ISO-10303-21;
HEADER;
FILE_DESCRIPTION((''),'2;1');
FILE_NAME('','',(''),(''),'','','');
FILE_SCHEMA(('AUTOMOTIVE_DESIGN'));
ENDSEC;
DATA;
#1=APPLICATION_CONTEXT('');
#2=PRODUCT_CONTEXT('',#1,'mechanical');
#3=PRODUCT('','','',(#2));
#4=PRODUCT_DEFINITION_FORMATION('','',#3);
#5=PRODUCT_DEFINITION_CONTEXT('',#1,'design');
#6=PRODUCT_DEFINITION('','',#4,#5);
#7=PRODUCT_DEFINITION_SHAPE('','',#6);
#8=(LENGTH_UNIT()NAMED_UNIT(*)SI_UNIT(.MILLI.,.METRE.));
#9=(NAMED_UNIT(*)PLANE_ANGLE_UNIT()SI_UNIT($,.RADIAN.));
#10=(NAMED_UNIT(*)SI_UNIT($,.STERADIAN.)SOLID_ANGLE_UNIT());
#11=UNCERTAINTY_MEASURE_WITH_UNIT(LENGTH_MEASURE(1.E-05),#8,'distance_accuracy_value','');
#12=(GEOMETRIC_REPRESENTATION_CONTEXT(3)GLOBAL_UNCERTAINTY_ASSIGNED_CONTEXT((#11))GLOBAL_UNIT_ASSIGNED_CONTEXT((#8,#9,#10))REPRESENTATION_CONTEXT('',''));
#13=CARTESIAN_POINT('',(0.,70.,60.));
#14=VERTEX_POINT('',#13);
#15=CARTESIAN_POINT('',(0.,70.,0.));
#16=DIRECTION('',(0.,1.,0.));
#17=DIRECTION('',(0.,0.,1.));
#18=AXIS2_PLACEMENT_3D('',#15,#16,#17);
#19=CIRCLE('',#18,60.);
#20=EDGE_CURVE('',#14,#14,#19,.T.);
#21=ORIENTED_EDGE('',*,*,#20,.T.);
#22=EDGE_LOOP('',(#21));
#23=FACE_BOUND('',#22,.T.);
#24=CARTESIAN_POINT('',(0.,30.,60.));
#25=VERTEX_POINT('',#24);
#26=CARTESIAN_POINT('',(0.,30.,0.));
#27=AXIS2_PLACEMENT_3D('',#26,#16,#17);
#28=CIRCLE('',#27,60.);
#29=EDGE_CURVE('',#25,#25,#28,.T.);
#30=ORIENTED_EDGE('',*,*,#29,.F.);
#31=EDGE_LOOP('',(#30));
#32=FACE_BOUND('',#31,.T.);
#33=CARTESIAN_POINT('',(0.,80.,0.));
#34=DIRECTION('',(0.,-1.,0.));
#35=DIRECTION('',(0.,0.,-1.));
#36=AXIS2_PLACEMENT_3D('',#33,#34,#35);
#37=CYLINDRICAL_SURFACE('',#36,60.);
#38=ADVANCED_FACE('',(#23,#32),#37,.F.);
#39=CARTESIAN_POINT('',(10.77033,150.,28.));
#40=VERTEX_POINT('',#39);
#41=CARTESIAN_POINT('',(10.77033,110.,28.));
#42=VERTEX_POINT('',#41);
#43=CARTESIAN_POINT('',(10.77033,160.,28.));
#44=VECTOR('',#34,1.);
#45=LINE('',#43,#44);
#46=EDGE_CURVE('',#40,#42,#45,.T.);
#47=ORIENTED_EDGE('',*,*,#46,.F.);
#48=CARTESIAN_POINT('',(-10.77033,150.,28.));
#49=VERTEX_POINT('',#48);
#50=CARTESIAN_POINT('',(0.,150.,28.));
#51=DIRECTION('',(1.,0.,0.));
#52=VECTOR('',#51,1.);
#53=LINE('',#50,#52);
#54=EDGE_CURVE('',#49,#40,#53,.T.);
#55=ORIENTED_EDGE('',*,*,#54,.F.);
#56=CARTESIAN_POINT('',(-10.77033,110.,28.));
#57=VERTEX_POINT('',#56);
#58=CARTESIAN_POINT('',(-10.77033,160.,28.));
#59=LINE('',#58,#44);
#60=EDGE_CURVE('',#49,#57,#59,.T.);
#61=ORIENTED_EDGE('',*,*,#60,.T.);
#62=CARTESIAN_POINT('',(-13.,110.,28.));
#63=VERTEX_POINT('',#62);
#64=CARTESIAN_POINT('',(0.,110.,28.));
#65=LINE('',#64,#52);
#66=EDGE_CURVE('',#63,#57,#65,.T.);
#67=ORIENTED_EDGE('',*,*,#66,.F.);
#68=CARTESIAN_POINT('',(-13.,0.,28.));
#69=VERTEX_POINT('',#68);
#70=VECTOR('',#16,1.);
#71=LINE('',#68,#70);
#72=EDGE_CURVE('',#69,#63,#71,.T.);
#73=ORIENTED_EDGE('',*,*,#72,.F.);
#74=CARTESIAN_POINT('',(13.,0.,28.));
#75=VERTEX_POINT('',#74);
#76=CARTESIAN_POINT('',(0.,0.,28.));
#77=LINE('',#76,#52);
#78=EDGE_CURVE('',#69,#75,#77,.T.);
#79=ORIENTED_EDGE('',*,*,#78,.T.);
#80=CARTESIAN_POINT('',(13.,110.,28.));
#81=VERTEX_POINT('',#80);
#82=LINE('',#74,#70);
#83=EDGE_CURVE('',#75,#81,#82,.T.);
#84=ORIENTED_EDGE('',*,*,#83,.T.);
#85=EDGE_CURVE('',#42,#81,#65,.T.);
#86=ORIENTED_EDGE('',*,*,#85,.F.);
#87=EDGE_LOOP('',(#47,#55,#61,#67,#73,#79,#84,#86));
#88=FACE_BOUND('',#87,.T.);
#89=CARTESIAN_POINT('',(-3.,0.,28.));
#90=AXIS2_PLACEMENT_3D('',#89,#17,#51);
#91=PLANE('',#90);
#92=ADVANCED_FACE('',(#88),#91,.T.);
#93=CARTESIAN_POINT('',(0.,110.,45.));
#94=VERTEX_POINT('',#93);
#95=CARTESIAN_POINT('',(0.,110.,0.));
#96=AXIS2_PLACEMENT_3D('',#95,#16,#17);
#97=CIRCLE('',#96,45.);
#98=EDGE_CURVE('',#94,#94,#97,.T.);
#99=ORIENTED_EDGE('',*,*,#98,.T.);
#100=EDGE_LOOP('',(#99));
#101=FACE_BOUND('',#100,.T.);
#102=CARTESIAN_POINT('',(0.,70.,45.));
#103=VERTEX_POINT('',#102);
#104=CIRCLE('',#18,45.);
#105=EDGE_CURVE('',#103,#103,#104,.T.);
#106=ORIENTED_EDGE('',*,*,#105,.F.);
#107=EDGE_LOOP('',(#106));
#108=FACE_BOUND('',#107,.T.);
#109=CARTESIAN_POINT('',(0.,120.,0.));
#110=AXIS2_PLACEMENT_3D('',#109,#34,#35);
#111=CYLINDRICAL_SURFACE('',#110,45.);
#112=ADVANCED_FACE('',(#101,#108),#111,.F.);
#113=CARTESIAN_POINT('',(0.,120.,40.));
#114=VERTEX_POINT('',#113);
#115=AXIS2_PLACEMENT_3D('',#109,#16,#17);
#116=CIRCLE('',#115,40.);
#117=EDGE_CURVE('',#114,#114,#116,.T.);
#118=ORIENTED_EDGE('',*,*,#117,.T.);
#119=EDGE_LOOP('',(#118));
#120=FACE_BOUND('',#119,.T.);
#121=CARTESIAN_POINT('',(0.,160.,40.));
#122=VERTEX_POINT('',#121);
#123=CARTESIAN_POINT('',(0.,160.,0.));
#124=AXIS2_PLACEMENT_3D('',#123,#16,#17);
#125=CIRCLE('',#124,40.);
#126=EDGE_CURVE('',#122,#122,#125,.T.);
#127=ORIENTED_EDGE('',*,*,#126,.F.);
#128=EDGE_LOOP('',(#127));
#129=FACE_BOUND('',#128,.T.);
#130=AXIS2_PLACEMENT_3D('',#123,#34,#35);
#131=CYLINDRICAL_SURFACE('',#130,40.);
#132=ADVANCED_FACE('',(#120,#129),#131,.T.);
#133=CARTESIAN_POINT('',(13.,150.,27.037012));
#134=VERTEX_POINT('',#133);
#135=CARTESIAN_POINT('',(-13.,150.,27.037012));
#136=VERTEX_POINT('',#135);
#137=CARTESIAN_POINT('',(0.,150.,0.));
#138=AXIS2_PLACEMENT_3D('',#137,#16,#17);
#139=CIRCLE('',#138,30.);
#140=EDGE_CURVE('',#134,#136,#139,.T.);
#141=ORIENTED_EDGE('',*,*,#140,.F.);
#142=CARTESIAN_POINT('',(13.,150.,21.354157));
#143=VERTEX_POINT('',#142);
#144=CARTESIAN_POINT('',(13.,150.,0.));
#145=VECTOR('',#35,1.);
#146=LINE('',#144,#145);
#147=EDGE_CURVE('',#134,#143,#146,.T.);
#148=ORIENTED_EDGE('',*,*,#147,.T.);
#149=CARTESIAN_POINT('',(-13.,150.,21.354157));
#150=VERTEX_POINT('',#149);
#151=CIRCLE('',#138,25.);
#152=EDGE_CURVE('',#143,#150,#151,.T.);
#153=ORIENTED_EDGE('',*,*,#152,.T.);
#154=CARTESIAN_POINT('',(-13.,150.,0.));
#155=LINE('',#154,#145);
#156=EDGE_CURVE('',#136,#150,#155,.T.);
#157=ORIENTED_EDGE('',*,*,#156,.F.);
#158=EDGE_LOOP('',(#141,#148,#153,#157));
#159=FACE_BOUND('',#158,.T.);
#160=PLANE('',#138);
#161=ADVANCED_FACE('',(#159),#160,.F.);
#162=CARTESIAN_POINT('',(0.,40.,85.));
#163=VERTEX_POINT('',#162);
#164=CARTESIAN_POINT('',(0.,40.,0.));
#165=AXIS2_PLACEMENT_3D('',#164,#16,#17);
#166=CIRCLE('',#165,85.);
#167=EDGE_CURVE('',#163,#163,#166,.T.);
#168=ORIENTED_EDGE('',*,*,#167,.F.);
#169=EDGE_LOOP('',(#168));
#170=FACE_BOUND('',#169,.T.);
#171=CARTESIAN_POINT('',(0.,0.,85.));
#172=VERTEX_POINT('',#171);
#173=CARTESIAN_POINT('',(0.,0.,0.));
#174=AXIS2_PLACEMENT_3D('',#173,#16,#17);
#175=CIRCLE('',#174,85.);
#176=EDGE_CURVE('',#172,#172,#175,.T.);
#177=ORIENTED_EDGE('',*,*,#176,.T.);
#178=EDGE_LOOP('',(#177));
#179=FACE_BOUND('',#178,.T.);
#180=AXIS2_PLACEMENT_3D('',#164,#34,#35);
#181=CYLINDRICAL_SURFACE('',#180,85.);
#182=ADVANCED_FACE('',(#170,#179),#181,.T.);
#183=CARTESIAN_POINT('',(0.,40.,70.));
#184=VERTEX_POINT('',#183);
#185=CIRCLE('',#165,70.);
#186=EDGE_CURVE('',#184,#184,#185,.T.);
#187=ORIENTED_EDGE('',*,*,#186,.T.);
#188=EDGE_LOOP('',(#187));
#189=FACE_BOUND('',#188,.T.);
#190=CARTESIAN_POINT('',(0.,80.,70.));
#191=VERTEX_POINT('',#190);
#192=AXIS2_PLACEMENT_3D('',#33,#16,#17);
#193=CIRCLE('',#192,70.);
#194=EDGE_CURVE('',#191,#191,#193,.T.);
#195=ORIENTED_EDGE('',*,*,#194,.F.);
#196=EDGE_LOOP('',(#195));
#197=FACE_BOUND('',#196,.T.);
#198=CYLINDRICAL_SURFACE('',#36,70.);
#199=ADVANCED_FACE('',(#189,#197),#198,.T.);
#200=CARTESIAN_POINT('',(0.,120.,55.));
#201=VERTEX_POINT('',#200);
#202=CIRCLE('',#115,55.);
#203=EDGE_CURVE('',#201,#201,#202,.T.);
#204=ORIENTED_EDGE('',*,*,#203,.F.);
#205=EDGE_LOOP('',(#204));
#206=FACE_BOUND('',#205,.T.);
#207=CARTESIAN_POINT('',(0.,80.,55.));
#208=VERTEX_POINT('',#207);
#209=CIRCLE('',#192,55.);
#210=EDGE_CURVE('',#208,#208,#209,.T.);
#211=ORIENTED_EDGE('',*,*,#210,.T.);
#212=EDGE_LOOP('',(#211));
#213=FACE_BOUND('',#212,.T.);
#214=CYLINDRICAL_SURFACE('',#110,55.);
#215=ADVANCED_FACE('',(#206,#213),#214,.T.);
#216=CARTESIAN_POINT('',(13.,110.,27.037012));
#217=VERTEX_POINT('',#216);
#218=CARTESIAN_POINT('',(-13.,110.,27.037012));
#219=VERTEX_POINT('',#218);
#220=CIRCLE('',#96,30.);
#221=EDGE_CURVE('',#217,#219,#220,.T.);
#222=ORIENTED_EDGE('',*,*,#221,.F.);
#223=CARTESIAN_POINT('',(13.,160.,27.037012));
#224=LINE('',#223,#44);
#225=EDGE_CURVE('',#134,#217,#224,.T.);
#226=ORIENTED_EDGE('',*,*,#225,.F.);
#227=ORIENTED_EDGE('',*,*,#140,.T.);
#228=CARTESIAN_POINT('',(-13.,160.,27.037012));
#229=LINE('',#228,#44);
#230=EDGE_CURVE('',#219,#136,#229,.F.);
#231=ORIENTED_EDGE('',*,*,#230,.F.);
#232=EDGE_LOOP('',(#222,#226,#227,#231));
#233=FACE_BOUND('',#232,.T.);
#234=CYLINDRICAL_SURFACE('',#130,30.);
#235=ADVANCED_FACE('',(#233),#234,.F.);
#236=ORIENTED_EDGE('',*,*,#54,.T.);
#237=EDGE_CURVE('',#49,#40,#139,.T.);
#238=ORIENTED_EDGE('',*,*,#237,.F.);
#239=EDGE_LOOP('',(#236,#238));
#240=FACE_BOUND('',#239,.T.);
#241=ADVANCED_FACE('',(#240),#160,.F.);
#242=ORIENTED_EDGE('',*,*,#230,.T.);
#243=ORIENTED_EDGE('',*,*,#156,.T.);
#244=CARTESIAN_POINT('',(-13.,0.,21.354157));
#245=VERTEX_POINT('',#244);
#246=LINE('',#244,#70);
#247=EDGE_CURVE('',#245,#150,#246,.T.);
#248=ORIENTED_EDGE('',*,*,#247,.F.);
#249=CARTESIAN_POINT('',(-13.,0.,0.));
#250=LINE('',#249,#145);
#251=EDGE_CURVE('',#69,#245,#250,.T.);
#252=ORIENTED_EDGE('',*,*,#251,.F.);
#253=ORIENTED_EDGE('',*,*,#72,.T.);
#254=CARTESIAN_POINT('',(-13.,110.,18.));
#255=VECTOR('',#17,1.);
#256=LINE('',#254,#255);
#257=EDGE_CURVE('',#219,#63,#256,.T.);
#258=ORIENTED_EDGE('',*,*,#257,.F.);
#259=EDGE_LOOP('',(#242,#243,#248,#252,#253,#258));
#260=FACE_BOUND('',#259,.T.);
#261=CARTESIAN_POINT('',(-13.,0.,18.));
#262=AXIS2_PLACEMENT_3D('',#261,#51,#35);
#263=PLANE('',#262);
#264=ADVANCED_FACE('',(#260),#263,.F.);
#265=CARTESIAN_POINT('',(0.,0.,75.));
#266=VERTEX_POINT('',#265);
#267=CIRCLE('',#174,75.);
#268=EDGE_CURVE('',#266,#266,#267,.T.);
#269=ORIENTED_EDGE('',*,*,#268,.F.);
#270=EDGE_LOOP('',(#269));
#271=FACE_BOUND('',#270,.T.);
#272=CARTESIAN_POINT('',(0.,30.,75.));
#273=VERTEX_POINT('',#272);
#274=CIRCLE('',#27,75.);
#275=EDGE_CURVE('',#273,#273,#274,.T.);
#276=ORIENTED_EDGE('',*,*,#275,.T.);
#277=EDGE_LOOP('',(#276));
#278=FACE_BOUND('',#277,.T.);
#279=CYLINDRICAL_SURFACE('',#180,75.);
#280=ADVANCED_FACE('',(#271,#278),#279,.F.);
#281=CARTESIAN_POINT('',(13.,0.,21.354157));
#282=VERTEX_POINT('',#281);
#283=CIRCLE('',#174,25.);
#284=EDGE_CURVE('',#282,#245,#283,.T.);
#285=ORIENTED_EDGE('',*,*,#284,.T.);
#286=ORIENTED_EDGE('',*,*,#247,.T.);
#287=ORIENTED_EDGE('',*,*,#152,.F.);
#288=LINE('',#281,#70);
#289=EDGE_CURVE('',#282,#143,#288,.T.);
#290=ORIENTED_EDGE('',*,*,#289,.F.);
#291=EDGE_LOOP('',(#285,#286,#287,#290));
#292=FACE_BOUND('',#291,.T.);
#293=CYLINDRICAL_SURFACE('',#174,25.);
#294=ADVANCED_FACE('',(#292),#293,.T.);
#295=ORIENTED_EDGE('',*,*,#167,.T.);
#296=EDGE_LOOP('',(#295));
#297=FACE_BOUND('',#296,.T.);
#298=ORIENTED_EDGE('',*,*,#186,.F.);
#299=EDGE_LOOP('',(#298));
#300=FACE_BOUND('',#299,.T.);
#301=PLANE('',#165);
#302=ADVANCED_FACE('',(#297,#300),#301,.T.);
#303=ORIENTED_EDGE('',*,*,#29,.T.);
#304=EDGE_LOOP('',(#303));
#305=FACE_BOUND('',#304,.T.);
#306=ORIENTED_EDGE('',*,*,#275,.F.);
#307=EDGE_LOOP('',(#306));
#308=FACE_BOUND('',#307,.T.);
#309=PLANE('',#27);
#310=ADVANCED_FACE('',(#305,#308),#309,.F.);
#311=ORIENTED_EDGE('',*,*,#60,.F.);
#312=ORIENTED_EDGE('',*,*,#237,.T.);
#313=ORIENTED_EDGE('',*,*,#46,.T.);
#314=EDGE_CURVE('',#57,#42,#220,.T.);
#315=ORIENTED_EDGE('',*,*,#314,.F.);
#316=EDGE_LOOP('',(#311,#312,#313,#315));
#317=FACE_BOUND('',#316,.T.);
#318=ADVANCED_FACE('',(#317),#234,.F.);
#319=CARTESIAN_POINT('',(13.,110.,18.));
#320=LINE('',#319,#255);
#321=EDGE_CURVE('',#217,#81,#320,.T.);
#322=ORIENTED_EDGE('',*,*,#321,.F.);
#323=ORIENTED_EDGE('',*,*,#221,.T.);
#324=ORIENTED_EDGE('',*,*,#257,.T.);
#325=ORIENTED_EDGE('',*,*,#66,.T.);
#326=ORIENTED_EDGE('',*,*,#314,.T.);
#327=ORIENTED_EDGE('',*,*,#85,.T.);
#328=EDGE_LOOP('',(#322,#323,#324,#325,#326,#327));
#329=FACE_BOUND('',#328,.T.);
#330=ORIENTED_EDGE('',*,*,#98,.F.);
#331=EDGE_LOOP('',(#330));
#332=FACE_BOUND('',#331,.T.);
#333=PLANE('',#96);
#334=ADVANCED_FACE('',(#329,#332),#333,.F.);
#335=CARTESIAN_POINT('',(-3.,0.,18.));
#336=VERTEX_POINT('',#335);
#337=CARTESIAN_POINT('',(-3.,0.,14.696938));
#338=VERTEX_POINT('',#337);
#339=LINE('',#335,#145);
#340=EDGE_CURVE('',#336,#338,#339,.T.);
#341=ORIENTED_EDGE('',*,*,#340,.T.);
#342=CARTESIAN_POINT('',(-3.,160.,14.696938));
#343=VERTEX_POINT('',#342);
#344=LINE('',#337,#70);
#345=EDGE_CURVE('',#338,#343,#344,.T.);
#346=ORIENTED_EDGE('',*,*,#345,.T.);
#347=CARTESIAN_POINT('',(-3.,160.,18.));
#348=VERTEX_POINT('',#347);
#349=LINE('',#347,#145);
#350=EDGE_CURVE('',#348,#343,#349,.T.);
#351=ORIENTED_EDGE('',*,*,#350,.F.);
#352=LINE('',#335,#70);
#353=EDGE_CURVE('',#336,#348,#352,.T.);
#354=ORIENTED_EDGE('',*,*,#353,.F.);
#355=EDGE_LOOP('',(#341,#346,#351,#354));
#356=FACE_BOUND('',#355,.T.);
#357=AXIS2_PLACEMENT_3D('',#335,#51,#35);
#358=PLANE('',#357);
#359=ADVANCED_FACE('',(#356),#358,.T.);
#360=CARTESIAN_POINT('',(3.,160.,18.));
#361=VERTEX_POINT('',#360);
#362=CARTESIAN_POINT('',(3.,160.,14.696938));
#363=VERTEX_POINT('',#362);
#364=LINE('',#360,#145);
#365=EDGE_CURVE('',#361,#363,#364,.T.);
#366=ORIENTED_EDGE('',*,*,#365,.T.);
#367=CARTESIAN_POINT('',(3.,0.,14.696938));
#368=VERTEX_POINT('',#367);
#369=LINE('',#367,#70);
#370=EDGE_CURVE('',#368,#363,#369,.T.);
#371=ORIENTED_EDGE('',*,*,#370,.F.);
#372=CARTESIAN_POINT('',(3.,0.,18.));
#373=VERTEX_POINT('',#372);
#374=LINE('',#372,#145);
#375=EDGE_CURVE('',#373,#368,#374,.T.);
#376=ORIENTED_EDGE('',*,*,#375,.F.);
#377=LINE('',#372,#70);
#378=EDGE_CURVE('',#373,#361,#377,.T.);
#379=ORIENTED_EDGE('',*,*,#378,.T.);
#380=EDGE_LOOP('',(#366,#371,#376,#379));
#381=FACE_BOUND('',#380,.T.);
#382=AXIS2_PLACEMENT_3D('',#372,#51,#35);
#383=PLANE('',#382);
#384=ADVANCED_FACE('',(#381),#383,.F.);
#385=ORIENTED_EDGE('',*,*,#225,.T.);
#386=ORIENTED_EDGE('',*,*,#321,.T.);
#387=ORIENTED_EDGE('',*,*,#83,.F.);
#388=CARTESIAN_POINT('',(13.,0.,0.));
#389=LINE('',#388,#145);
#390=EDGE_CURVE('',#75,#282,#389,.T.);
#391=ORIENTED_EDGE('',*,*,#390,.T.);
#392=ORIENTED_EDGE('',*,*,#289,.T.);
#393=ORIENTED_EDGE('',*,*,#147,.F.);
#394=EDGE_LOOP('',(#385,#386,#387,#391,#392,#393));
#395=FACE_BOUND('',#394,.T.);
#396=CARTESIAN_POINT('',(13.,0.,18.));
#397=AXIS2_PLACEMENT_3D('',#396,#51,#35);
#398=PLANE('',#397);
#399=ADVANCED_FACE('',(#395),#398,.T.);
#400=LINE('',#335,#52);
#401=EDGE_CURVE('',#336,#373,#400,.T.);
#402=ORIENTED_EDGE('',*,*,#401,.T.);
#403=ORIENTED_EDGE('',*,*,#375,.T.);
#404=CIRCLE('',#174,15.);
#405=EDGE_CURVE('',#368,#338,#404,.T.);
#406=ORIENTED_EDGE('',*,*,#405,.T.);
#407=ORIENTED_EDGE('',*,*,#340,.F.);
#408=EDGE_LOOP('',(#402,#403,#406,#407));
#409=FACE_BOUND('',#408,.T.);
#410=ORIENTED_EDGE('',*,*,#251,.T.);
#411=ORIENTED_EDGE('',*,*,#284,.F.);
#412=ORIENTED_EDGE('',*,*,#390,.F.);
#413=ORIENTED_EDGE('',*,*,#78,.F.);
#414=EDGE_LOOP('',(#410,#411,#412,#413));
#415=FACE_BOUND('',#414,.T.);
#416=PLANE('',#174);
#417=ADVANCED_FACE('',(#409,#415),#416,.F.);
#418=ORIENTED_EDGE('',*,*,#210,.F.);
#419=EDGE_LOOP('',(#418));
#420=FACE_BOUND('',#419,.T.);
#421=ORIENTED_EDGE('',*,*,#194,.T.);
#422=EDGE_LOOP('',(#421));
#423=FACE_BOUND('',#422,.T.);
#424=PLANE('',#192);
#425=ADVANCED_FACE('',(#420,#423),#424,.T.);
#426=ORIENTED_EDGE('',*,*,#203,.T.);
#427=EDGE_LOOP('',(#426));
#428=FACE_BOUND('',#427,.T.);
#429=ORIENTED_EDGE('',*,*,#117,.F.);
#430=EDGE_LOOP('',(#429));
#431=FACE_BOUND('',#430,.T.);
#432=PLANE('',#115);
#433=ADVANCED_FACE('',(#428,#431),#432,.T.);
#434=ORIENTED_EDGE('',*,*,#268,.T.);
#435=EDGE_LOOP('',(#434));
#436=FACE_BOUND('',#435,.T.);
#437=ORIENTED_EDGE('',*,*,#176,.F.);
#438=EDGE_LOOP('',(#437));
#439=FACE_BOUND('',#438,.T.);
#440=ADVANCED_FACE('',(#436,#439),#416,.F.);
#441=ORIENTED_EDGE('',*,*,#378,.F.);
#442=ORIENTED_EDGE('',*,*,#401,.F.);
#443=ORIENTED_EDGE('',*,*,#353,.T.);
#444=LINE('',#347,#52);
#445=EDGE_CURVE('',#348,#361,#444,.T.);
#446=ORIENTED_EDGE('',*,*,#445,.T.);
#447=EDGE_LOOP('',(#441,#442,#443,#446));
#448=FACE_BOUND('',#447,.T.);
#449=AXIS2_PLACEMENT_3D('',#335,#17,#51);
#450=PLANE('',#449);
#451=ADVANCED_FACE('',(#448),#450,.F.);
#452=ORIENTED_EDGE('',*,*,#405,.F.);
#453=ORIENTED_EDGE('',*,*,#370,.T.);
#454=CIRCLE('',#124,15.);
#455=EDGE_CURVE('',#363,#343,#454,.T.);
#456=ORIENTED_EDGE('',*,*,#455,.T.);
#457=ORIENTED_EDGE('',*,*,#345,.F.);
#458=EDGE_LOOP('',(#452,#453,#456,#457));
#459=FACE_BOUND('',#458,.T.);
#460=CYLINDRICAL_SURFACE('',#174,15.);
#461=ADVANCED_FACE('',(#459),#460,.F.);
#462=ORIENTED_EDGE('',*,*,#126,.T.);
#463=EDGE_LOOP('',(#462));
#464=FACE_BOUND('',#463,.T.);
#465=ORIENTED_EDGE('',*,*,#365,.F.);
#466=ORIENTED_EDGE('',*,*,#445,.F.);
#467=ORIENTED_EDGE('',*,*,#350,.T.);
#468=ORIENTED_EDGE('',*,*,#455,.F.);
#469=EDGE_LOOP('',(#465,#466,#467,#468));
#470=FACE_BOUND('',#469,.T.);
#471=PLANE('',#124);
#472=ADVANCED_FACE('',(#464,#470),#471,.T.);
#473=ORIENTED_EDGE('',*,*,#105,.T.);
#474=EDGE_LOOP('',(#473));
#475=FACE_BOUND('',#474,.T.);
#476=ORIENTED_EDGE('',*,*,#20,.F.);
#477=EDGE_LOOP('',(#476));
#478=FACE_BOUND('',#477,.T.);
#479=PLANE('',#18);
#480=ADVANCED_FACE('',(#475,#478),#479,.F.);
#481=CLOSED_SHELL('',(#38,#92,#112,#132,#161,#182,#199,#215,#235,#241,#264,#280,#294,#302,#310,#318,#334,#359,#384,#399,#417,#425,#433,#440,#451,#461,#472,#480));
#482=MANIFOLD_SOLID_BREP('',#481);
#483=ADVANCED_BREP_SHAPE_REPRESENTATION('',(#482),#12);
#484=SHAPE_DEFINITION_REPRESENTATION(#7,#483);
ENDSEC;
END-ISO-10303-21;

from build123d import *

# Parameters (mm, degrees)
SKETCH1_R            = 85
BOSS_EXTRUDE1_DEPTH  = 40
SKETCH2_R            = 70
BOSS_EXTRUDE2_DEPTH  = 40
SKETCH3_R            = 55
BOSS_EXTRUDE3_DEPTH  = 40
SKETCH4_R            = 40
BOSS_EXTRUDE4_DEPTH  = 40
SKETCH5_R            = 15
SKETCH5_W            = 6
SKETCH5_H            = 6
CUT_EXTRUDE1_DEPTH   = 201.124960962
SHELL1_OUTLINE_R     = 60
SHELL1_DEPTH         = 70
SHELL1_2_OUTLINE_R   = 75
SHELL1_2_OUTLINE_R_2 = 60
SHELL1_2_DEPTH       = 30
SHELL1_START         = 70
SHELL1_3_OUTLINE_R   = 45
SHELL1_3_DEPTH       = 40
SHELL1_START_2       = 110
SHELL1_4_DEPTH       = 40


# Read off the part's stored shape, not the designer's step: Shell1
with BuildPart() as part:
    # Sketch1 → Boss-Extrude1 (new body)
    with BuildSketch(Plane(origin=(0, 0, 0), x_dir=(1, 0, 0), z_dir=(0, 1, 0))):
        with Locations(Location((0, 0, 0), (0, 0, 270))):
            Circle(SKETCH1_R)
    extrude(amount=BOSS_EXTRUDE1_DEPTH)

    # Sketch2 → Boss-Extrude2 (add)
    with BuildSketch(Plane(origin=(0, 40, 0), x_dir=(1, 0, 0), z_dir=(0, 1, 0))):
        with Locations(Location((0, 0, 0), (0, 0, 270))):
            Circle(SKETCH2_R)
    extrude(amount=BOSS_EXTRUDE2_DEPTH)

    # Sketch3 → Boss-Extrude3 (add)
    with BuildSketch(Plane(origin=(0, 80, 0), x_dir=(1, 0, 0), z_dir=(0, 1, 0))):
        with Locations(Location((0, 0, 0), (0, 0, 270))):
            Circle(SKETCH3_R)
    extrude(amount=BOSS_EXTRUDE3_DEPTH)

    # Sketch4 → Boss-Extrude4 (add)
    with BuildSketch(Plane(origin=(0, 120, 0), x_dir=(1, 0, 0), z_dir=(0, 1, 0))):
        with Locations(Location((0, 0, 0), (0, 0, 270))):
            Circle(SKETCH4_R)
    extrude(amount=BOSS_EXTRUDE4_DEPTH)

    # Sketch5 → Cut-Extrude1 (cut, through all)
    with BuildSketch(Plane(origin=(0, 160, 0), x_dir=(1, 0, 0), z_dir=(0, 1, 0))):
        Circle(SKETCH5_R)
        with Locations((0, -15)):
            Rectangle(SKETCH5_W, SKETCH5_H)
    extrude(amount=-CUT_EXTRUDE1_DEPTH, mode=Mode.SUBTRACT)

    # Shell1 outline → Shell1 (cut)
    with BuildSketch(Plane(origin=(0, 0, 0), x_dir=(1, 0, 0), z_dir=(0, 1, 0))):
        Circle(SHELL1_OUTLINE_R)
        with BuildLine():
            Line((13, -21.354156504), (13, -28))
            Line((13, -28), (-13, -28))
            Line((-13, -28), (-13, -21.354156504))
            ThreePointArc((-13, -21.354156504), (0, 25), (13, -21.354156504))
        make_face(mode=Mode.SUBTRACT)
    extrude(amount=SHELL1_DEPTH, mode=Mode.SUBTRACT)

    # Shell1 2 outline → Shell1 2 (cut)
    with BuildSketch(Plane(origin=(0, 0, 0), x_dir=(1, 0, 0), z_dir=(0, 1, 0))):
        Circle(SHELL1_2_OUTLINE_R)
        Circle(SHELL1_2_OUTLINE_R_2, mode=Mode.SUBTRACT)
    extrude(amount=SHELL1_2_DEPTH, mode=Mode.SUBTRACT)

    # Shell1 3 outline → Shell1 3 (cut)
    with BuildSketch(Plane(origin=(0, 0, 0), x_dir=(1, 0, 0), z_dir=(0, 1, 0)).offset(SHELL1_START)):
        Circle(SHELL1_3_OUTLINE_R)
        with BuildLine():
            Line((13, -21.354156504), (13, -28))
            Line((13, -28), (-13, -28))
            Line((-13, -28), (-13, -21.354156504))
            ThreePointArc((-13, -21.354156504), (0, 25), (13, -21.354156504))
        make_face(mode=Mode.SUBTRACT)
    extrude(amount=SHELL1_3_DEPTH, mode=Mode.SUBTRACT)

    # Shell1 4 outline → Shell1 4 (cut)
    with BuildSketch(Plane(origin=(0, 0, 0), x_dir=(1, 0, 0), z_dir=(0, 1, 0)).offset(SHELL1_START_2)):
        with BuildLine():
            Line((13, -21.354156504), (13, -27.037011669))
            ThreePointArc((13, -27.037011669), (0, 30), (-13, -27.037011669))
            Line((-13, -27.037011669), (-13, -21.354156504))
            ThreePointArc((-13, -21.354156504), (0, 25), (13, -21.354156504))
        make_face()
        with BuildLine():
            ThreePointArc((-10.770329614, -28), (0, -30), (10.770329614, -28))
            Line((10.770329614, -28), (-10.770329614, -28))
        make_face()
    extrude(amount=SHELL1_4_DEPTH, mode=Mode.SUBTRACT)


solid = part.part
